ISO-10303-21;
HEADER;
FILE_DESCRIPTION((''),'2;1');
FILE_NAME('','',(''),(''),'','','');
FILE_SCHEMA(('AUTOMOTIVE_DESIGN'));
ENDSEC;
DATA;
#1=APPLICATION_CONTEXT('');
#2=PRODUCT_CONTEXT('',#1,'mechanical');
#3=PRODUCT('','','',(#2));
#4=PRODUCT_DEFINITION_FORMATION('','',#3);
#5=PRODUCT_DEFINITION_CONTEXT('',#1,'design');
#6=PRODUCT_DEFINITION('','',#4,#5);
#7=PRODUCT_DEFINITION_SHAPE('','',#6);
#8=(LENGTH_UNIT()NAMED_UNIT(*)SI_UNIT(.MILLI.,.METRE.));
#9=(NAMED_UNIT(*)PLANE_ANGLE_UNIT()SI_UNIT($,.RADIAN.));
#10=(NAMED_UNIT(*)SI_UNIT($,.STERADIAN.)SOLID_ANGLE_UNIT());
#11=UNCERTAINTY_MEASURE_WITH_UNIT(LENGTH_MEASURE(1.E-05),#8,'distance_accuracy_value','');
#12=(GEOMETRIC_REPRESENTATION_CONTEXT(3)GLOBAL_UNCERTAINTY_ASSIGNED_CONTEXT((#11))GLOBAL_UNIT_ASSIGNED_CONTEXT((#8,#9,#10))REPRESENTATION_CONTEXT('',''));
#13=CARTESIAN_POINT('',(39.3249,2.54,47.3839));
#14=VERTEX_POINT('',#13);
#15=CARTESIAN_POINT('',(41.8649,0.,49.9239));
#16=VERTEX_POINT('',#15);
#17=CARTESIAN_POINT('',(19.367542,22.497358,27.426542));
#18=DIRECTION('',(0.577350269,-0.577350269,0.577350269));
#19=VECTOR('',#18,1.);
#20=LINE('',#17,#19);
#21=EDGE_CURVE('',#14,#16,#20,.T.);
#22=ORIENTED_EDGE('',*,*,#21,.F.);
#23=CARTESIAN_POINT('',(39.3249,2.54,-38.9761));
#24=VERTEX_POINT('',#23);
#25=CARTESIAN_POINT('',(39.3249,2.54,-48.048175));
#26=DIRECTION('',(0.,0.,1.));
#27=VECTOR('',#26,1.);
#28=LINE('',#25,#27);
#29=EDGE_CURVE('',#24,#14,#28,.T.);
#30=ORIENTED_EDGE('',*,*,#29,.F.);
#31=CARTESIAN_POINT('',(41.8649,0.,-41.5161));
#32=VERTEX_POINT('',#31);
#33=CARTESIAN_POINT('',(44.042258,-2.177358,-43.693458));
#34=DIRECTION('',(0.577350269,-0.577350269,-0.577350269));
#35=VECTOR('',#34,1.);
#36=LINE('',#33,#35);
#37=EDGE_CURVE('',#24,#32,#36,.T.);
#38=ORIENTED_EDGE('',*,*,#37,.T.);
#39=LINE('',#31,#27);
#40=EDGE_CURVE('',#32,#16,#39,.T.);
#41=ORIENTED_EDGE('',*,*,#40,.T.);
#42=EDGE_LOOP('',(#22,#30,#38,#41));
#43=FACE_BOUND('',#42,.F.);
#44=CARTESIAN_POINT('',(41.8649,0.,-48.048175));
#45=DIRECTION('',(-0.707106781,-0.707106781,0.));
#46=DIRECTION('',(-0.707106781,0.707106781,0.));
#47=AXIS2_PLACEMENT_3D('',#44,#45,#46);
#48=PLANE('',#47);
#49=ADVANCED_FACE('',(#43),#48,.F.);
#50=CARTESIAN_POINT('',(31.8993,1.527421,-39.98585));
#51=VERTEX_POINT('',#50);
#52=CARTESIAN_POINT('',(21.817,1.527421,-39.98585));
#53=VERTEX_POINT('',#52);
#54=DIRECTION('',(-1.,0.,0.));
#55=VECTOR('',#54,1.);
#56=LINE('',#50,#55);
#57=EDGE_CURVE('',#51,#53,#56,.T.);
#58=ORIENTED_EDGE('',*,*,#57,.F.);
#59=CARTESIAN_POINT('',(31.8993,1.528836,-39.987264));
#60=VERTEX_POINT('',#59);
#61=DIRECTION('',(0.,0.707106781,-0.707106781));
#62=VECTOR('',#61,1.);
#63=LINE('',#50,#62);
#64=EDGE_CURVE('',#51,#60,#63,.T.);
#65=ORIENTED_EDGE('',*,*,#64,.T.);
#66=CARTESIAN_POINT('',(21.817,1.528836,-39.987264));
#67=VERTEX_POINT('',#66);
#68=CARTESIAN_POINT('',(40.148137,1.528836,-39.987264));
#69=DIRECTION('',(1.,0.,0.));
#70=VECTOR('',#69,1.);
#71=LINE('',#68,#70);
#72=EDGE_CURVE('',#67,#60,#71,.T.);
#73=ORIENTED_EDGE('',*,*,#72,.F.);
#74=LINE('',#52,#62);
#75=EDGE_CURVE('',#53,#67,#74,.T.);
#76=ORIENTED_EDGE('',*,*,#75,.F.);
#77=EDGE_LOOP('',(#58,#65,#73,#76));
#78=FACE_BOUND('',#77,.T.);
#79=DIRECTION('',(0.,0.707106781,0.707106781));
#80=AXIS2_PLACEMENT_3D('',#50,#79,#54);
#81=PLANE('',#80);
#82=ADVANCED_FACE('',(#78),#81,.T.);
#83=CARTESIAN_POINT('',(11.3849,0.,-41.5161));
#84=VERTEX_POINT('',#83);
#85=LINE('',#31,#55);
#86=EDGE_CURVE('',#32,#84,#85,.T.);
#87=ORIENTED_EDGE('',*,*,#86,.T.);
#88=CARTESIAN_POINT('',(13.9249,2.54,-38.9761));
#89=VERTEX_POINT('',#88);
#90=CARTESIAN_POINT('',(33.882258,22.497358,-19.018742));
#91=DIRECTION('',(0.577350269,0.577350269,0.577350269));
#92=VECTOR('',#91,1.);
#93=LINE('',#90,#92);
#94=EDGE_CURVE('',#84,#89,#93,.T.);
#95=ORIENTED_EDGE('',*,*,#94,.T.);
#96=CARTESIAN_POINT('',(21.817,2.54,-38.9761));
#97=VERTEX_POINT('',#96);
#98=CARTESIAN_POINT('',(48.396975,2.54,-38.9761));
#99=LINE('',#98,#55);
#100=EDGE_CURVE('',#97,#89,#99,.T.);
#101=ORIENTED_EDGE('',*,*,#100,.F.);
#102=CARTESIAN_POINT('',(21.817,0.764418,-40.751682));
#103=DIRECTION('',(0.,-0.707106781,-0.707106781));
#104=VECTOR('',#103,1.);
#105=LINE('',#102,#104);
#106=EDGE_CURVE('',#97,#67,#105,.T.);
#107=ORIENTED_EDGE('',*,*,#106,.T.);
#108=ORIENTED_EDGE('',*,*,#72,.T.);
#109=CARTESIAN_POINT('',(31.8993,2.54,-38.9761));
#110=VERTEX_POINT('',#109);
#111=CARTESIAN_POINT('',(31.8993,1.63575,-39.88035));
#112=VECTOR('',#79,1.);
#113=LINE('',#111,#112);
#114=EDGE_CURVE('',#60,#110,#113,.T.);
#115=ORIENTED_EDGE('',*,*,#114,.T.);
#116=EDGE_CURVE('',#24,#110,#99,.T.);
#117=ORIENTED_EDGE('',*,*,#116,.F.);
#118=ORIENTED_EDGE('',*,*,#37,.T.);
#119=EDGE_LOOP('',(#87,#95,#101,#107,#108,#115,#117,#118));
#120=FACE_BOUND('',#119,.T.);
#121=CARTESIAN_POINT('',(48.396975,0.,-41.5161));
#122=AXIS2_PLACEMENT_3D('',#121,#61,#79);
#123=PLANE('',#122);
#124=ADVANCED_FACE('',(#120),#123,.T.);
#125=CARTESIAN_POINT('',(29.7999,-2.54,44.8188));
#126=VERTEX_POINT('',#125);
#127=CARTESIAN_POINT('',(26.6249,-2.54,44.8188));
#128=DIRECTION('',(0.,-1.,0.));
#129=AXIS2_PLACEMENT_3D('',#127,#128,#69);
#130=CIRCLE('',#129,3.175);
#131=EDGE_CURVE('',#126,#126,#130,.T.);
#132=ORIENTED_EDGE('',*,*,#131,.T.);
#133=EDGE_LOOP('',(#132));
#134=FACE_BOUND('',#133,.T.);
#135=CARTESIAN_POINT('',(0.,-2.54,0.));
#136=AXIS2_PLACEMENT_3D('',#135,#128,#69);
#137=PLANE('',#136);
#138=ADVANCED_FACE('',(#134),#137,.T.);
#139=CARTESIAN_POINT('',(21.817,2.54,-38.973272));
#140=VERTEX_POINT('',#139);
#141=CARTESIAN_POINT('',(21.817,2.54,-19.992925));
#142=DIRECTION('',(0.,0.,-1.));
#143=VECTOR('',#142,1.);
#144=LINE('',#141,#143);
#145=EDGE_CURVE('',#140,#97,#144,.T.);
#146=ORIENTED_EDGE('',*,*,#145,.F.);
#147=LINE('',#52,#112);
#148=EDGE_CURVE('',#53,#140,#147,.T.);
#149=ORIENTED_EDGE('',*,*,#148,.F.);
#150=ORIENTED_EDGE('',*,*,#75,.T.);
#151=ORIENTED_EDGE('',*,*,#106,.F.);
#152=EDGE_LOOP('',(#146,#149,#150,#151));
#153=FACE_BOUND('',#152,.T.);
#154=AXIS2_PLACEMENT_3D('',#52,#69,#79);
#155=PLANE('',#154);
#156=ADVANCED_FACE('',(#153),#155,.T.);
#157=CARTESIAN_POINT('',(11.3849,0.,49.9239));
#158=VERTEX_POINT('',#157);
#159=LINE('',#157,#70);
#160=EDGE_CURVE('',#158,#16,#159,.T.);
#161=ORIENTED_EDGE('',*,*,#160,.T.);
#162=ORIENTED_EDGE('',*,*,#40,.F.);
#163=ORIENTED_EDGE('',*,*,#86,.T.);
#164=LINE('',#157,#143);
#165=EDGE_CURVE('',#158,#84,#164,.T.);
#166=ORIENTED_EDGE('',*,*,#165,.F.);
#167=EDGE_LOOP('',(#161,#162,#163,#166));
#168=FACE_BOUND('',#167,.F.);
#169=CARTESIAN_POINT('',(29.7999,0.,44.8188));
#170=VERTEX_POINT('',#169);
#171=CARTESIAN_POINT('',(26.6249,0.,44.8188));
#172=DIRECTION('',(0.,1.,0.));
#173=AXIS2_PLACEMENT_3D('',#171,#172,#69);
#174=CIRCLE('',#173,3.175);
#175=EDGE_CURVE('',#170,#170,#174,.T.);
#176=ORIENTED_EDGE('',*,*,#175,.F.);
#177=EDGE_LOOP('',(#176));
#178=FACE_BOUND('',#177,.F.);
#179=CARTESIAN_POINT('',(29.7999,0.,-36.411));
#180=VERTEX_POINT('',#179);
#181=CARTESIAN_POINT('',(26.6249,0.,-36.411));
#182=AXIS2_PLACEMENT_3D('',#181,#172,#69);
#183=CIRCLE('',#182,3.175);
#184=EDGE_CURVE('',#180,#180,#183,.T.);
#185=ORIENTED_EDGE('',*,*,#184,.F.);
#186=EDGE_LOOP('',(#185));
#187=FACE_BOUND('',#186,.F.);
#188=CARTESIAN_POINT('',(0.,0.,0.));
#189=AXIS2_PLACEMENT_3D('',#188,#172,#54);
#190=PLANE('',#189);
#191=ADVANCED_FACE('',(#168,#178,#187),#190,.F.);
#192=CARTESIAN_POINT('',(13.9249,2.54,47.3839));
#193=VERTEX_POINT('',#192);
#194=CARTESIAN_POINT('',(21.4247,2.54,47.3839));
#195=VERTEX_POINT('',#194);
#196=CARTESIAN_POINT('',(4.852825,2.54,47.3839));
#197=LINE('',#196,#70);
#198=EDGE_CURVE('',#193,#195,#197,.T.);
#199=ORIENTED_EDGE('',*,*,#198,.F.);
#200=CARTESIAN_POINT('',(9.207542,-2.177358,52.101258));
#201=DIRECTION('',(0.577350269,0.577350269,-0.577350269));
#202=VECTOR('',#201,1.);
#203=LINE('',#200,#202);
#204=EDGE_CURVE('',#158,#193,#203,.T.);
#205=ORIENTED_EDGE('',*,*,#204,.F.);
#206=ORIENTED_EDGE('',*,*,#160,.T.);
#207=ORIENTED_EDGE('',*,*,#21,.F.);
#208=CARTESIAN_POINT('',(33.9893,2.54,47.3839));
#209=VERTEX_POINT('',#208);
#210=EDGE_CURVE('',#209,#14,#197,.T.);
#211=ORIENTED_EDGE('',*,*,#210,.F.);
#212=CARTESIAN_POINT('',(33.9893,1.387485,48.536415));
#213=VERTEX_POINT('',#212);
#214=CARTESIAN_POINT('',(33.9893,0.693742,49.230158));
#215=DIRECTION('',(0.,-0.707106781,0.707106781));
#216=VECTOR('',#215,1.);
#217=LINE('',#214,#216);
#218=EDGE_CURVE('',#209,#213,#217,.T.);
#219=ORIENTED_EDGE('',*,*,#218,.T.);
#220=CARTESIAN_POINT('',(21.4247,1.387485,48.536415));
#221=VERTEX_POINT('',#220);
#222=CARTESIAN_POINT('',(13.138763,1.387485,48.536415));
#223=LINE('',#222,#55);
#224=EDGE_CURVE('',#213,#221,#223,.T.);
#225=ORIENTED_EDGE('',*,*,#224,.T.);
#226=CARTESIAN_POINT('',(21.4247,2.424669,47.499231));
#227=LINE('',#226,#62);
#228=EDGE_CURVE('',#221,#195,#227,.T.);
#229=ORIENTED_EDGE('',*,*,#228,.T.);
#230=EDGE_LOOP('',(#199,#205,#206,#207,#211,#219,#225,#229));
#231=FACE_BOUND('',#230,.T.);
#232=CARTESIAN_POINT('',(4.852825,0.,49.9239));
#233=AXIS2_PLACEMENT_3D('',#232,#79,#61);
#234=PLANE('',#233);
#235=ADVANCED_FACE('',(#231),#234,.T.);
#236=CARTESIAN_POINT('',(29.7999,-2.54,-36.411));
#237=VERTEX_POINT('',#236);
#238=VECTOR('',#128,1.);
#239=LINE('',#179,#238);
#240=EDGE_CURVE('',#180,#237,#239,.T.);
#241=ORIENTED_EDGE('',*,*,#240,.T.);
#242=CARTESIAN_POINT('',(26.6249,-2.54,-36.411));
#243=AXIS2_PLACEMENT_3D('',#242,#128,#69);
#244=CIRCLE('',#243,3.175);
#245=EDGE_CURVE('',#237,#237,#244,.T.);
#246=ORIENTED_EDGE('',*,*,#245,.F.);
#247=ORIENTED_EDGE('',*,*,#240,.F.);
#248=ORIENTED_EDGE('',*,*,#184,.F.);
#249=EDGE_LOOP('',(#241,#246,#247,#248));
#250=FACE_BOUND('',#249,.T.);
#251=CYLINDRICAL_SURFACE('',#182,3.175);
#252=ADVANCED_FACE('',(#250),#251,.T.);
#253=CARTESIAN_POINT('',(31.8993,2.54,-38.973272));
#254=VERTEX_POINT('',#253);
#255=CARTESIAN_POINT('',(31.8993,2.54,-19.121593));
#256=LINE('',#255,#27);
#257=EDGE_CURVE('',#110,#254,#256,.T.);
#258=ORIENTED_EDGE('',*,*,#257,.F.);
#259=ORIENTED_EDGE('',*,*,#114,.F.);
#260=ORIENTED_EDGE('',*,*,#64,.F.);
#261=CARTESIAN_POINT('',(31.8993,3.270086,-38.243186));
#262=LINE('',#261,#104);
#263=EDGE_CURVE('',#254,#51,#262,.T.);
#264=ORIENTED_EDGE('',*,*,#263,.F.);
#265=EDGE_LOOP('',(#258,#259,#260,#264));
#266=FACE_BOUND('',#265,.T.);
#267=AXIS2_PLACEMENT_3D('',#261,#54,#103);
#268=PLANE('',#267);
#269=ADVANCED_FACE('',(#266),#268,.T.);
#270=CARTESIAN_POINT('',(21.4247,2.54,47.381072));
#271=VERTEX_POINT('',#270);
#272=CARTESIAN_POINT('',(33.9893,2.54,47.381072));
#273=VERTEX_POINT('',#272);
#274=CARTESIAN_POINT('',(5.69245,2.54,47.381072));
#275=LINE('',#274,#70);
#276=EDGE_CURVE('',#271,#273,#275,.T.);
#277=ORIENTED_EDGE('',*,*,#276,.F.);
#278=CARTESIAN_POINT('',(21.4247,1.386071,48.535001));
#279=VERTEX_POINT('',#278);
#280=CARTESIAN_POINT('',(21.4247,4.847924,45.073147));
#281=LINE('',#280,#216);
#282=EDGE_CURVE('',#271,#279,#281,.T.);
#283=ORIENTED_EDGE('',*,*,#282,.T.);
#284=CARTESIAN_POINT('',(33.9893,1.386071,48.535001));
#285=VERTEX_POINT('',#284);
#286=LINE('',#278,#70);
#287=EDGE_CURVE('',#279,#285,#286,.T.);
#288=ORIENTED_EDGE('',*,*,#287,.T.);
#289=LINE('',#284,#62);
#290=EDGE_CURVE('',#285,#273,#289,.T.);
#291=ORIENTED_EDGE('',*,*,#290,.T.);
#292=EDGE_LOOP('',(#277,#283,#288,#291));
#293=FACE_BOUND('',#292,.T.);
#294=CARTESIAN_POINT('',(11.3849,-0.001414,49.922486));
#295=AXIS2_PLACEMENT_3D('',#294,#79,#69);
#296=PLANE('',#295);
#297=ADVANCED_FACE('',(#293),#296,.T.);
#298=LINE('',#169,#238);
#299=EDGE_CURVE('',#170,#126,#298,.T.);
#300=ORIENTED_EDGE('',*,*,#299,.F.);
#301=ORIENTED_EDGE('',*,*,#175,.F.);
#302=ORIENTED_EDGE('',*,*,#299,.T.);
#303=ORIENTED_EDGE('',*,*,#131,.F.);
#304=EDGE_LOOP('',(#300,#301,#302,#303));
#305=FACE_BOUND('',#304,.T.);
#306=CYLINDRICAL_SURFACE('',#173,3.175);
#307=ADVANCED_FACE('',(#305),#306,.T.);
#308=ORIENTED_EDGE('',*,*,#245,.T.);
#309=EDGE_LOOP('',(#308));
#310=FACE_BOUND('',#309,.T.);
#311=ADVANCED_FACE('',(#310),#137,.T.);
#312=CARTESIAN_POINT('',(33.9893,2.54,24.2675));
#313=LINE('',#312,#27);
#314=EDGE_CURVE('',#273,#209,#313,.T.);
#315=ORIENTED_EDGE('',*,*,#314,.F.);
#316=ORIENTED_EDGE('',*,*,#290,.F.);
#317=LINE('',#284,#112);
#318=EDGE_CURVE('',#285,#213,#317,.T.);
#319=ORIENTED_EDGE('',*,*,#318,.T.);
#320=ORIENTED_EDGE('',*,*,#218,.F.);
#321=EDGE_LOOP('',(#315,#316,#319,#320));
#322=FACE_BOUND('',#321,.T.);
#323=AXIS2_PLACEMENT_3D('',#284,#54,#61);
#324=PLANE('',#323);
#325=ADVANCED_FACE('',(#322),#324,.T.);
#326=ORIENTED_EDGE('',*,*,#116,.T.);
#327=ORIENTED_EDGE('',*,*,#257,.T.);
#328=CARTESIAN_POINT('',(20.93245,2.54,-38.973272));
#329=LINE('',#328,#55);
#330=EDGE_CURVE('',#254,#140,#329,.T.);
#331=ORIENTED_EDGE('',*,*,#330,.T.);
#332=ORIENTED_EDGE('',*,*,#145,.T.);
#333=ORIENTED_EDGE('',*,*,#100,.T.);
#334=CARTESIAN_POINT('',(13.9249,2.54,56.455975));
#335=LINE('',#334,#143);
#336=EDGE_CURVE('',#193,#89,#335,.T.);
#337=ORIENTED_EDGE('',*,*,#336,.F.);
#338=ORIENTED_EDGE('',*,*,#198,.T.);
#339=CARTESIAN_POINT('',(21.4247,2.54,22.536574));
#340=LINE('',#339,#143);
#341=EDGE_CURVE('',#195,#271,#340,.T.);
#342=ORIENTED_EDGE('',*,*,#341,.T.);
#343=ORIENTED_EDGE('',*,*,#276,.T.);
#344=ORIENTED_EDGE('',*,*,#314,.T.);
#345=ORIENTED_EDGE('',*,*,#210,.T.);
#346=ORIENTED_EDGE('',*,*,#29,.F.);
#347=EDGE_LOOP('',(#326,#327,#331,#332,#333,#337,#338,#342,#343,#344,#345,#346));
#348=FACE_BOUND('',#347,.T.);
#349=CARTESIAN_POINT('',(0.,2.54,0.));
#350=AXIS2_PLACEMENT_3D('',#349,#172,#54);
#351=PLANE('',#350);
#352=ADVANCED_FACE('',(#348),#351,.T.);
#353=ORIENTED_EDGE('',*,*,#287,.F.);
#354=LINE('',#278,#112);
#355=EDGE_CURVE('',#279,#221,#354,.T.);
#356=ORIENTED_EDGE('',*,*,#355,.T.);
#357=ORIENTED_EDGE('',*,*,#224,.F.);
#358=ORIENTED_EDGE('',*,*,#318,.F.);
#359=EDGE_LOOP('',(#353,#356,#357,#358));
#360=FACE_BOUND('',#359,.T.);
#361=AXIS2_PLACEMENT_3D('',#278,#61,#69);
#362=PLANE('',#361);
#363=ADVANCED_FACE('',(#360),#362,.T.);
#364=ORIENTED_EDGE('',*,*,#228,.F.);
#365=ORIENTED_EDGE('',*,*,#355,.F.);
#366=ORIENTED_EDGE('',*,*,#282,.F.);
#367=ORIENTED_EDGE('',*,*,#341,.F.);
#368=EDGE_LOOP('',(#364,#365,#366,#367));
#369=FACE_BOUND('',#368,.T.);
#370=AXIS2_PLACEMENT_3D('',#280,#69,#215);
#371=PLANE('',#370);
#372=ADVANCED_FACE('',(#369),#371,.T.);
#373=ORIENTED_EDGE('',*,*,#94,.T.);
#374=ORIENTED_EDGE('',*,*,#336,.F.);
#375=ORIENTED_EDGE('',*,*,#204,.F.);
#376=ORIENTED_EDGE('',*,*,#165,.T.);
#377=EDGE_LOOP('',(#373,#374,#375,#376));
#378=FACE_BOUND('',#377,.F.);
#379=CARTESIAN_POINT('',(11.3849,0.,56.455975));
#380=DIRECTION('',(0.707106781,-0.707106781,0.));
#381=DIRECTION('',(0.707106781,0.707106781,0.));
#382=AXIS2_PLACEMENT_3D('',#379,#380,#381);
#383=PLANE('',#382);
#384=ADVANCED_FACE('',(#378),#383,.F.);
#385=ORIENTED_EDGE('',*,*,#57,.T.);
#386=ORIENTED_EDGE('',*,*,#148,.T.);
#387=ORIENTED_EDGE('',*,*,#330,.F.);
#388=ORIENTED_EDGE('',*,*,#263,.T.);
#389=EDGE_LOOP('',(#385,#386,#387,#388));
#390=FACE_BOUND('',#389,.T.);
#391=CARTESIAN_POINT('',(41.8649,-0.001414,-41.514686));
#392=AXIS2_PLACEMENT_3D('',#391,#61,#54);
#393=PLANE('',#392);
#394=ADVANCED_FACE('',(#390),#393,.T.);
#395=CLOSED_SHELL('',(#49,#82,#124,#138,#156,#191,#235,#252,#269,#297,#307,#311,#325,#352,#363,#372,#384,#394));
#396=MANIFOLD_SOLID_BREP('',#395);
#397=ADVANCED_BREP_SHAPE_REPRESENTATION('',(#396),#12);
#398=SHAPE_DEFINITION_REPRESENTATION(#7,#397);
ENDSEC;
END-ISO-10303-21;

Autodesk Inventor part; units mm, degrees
ref_plane "YZ Plane" through (0, 0, 0) normal (1, 0, 0) x (0, 1, 0)
ref_plane "XZ Plane" through (0, 0, 0) normal (0, 1, 0) x (-1, 0, 0)
ref_plane "XY Plane" through (0, 0, 0) normal (0, 0, 1) x (1, 0, 0)
sketch "Sketch1" plane through (0, 0, 0) normal (0, 1, 0) x (-1, 0, 0)
  line L0 (-21.4179, -39.4841) -> (-21.4179, -33.3379)
  line L1 (-21.4179, -33.3379) -> (-13.4169, -33.3379)
  line L2 (-13.4169, -33.3379) -> (-13.4169, -39.4841)
  line L3 (-13.4169, -39.4841) -> (-21.4179, -39.4841)
  line L4 (-21.4179, 41.7458) -> (-21.4179, 47.8919)
  line L5 (-21.4179, 47.8919) -> (-13.4169, 47.8919)
  line L6 (-13.4169, 47.8919) -> (-13.4169, 41.7458)
  line L7 (-13.4169, 41.7458) -> (-21.4179, 41.7458)
  circle A0 centre (-26.6249, -36.411) radius 3.175
  circle A1 centre (-26.6249, 44.8188) radius 3.175
  line L8 (-31.8319, 47.8919) -> (-31.8319, 41.7458)
  line L9 (-31.8319, 41.7458) -> (-39.8329, 41.7458)
  line L10 (-39.8329, 41.7458) -> (-39.8329, 47.8919)
  line L11 (-39.8329, 47.8919) -> (-31.8319, 47.8919)
  line L12 (-31.8319, -33.3379) -> (-31.8319, -39.4841)
  line L13 (-31.8319, -39.4841) -> (-39.8329, -39.4841)
  line L14 (-39.8329, -39.4841) -> (-39.8329, -33.3379)
  line L15 (-39.8329, -33.3379) -> (-31.8319, -33.3379)
  line L16 (-41.8649, 3.1879) -> (-27.6409, 3.1879)
  line L17 (-27.6409, 3.1879) -> (-27.6409, -6.9721)
  line L18 (-27.6409, -6.9721) -> (-41.8649, -6.9721)
  line L19 (-41.8649, -6.9721) -> (-41.8649, -9.0041)
  line L20 (-41.8649, -9.0041) -> (-27.6409, -9.0041)
  line L21 (-27.6409, -9.0041) -> (-27.6409, -19.1641)
  line L22 (-27.6409, -19.1641) -> (-41.8649, -19.1641)
  line L23 (-41.8649, -19.1641) -> (-41.8649, -21.1961)
  line L24 (-41.8649, -21.1961) -> (-27.6409, -21.1961)
  line L25 (-27.6409, -21.1961) -> (-27.6409, -31.3561)
  line L26 (-27.6409, -31.3561) -> (-41.8649, -31.3561)
  line L27 (-41.8649, -31.3561) -> (-41.8649, -41.5161)
  line L28 (-41.8649, -41.5161) -> (-11.3849, -41.5161)
  line L29 (-11.3849, -41.5161) -> (-11.3849, -31.3561)
  line L30 (-11.3849, -31.3561) -> (-25.6089, -31.3561)
  line L31 (-25.6089, -31.3561) -> (-25.6089, -21.1961)
  line L32 (-25.6089, -21.1961) -> (-11.3849, -21.1961)
  line L33 (-11.3849, -21.1961) -> (-11.3849, -19.1641)
  line L34 (-11.3849, -19.1641) -> (-25.6089, -19.1641)
  line L35 (-25.6089, -19.1641) -> (-25.6089, -9.0041)
  line L36 (-25.6089, -9.0041) -> (-11.3849, -9.0041)
  line L37 (-11.3849, -9.0041) -> (-11.3849, -6.9721)
  line L38 (-11.3849, -6.9721) -> (-25.6089, -6.9721)
  line L39 (-25.6089, -6.9721) -> (-25.6089, 3.1879)
  line L40 (-25.6089, 3.1879) -> (-11.3849, 3.1879)
  line L41 (-11.3849, 3.1879) -> (-11.3849, 5.2199)
  line L42 (-11.3849, 5.2199) -> (-25.6089, 5.2199)
  line L43 (-25.6089, 5.2199) -> (-25.6089, 15.3799)
  line L44 (-25.6089, 15.3799) -> (-11.3849, 15.3799)
  line L45 (-11.3849, 15.3799) -> (-11.3849, 17.4119)
  line L46 (-11.3849, 17.4119) -> (-25.6089, 17.4119)
  line L47 (-25.6089, 17.4119) -> (-25.6089, 27.5719)
  line L48 (-25.6089, 27.5719) -> (-11.3849, 27.5719)
  line L49 (-11.3849, 27.5719) -> (-11.3849, 29.6039)
  line L50 (-11.3849, 29.6039) -> (-25.6089, 29.6039)
  line L51 (-25.6089, 29.6039) -> (-25.6089, 39.7639)
  line L52 (-25.6089, 39.7639) -> (-11.3849, 39.7639)
  line L53 (-11.3849, 39.7639) -> (-11.3849, 49.9239)
  line L54 (-11.3849, 49.9239) -> (-41.8649, 49.9239)
  line L55 (-41.8649, 49.9239) -> (-41.8649, 39.7639)
  line L56 (-41.8649, 39.7639) -> (-27.6409, 39.7639)
  line L57 (-27.6409, 39.7639) -> (-27.6409, 29.6039)
  line L58 (-27.6409, 29.6039) -> (-41.8649, 29.6039)
  line L59 (-41.8649, 29.6039) -> (-41.8649, 27.5719)
  line L60 (-41.8649, 27.5719) -> (-27.6409, 27.5719)
  line L61 (-27.6409, 27.5719) -> (-27.6409, 17.4119)
  line L62 (-27.6409, 17.4119) -> (-41.8649, 17.4119)
  line L63 (-41.8649, 17.4119) -> (-41.8649, 15.3799)
  line L64 (-41.8649, 15.3799) -> (-27.6409, 15.3799)
  line L65 (-27.6409, 15.3799) -> (-27.6409, 5.2199)
  line L66 (-27.6409, 5.2199) -> (-41.8649, 5.2199)
  line L67 (-41.8649, 5.2199) -> (-41.8649, 3.1879)
  line L68 (-11.3849, -31.3561) -> (-11.3849, 39.7639)
  line L69 (-41.8649, 39.7639) -> (-41.8649, -31.3561)
  point P0 (0, 0)
extrude "Extrusion1" add sketch "Sketch1" along normal blind 2.54 contours L0 L1 L2 L3 | L4 L5 L6 L7 | L8 L9 L10 L11 | L12 L13 L14 L15 | L67 L66 L65 L64 L63 L62 L61 L60 L59 L58 L57 L56 L55 L54 L53 L52 L51 L50 L49 L48 L47 L46 L45 L44 L43 L42 L41 L40 L39 L38 L37 L36 L35 L34 L33 L32 L31 L30 L29 L28 L27 L26 L25 L24 L23 L22 L21 L20 L19 L18 L17 L16 | L16 L17 L18 L69 | L69 L64 L65 L66 | L20 L21 L22 L69 | L69 L60 L61 L62 | L24 L25 L26 L69 | L69 L56 L57 L58 | L30 L31 L32 L68 | L68 L50 L51 L52 | L34 L35 L36 L68 | L68 L46 L47 L48 | L38 L39 L40 L68 | L68 L42 L43 L44
chamfer "Chamfer1" distance 2.54 angle 45 4 edges at (26.6249, 2.54, 49.9239) (41.8649, 2.54, -20.1801) (11.3849, 2.54, -36.4361) (26.6249, 2.54, -41.5161)
sketch "Sketch2" plane through (0, 0, 0) normal (0, -1, 0) x (1, 0, 0)
  circle A0 centre (26.6249, 44.8188) radius 3.175 projected
  circle A1 centre (26.6249, 44.8188) radius 3.175
  circle A2 centre (26.6249, -36.411) radius 3.175 projected
  circle A3 centre (26.6249, -36.411) radius 3.175
  point P0 (0, 0)
extrude "Extrusion2" add sketch "Sketch2" along normal blind 2.54
sketch "Sketch3" plane through (26.6249, 0, 44.8188) normal (0, 1, 0) x (1, 0, 0)
  circle A0 centre (0, 81.2298) radius 3.175 projected
  circle A1 centre (0, 0) radius 3.175 projected
  point P0 (-26.6249, 44.8188)
extrude "Extrusion3" add sketch "Sketch3" along normal blind 2.54
sketch "Sketch4" plane through (11.3849, 0, 49.9239) normal (0, 0.7071068, 0.7071068) x (1, 0, 0)
  line L0 (10.0398, 1.9622) -> (22.6044, 1.9622)
  line L1 (22.6044, 1.9622) -> (22.6044, 6.858)
  line L2 (22.6044, 6.858) -> (10.0398, 6.858)
  line L3 (10.0398, 6.858) -> (10.0398, 1.9622)
  point P0 (-11.3849, 35.3015)
extrude "Extrusion4" cut sketch "Sketch4" along normal blind 2.54
sketch "Sketch5" plane through (41.8649, 0, -41.5161) normal (0, 0.7071068, -0.7071068) x (-1, 0, 0)
  line L0 (9.9656, 2.1621) -> (20.0479, 2.1621)
  line L1 (20.0479, 2.1621) -> (20.0479, 4.6266)
  line L2 (20.0479, 4.6266) -> (9.9656, 4.6266)
  line L3 (9.9656, 4.6266) -> (9.9656, 2.1621)
  point P0 (41.8649, 29.3563)
extrude "Extrusion5" cut sketch "Sketch5" along normal blind 2.54
properties part number "TerminalBlockLid"
